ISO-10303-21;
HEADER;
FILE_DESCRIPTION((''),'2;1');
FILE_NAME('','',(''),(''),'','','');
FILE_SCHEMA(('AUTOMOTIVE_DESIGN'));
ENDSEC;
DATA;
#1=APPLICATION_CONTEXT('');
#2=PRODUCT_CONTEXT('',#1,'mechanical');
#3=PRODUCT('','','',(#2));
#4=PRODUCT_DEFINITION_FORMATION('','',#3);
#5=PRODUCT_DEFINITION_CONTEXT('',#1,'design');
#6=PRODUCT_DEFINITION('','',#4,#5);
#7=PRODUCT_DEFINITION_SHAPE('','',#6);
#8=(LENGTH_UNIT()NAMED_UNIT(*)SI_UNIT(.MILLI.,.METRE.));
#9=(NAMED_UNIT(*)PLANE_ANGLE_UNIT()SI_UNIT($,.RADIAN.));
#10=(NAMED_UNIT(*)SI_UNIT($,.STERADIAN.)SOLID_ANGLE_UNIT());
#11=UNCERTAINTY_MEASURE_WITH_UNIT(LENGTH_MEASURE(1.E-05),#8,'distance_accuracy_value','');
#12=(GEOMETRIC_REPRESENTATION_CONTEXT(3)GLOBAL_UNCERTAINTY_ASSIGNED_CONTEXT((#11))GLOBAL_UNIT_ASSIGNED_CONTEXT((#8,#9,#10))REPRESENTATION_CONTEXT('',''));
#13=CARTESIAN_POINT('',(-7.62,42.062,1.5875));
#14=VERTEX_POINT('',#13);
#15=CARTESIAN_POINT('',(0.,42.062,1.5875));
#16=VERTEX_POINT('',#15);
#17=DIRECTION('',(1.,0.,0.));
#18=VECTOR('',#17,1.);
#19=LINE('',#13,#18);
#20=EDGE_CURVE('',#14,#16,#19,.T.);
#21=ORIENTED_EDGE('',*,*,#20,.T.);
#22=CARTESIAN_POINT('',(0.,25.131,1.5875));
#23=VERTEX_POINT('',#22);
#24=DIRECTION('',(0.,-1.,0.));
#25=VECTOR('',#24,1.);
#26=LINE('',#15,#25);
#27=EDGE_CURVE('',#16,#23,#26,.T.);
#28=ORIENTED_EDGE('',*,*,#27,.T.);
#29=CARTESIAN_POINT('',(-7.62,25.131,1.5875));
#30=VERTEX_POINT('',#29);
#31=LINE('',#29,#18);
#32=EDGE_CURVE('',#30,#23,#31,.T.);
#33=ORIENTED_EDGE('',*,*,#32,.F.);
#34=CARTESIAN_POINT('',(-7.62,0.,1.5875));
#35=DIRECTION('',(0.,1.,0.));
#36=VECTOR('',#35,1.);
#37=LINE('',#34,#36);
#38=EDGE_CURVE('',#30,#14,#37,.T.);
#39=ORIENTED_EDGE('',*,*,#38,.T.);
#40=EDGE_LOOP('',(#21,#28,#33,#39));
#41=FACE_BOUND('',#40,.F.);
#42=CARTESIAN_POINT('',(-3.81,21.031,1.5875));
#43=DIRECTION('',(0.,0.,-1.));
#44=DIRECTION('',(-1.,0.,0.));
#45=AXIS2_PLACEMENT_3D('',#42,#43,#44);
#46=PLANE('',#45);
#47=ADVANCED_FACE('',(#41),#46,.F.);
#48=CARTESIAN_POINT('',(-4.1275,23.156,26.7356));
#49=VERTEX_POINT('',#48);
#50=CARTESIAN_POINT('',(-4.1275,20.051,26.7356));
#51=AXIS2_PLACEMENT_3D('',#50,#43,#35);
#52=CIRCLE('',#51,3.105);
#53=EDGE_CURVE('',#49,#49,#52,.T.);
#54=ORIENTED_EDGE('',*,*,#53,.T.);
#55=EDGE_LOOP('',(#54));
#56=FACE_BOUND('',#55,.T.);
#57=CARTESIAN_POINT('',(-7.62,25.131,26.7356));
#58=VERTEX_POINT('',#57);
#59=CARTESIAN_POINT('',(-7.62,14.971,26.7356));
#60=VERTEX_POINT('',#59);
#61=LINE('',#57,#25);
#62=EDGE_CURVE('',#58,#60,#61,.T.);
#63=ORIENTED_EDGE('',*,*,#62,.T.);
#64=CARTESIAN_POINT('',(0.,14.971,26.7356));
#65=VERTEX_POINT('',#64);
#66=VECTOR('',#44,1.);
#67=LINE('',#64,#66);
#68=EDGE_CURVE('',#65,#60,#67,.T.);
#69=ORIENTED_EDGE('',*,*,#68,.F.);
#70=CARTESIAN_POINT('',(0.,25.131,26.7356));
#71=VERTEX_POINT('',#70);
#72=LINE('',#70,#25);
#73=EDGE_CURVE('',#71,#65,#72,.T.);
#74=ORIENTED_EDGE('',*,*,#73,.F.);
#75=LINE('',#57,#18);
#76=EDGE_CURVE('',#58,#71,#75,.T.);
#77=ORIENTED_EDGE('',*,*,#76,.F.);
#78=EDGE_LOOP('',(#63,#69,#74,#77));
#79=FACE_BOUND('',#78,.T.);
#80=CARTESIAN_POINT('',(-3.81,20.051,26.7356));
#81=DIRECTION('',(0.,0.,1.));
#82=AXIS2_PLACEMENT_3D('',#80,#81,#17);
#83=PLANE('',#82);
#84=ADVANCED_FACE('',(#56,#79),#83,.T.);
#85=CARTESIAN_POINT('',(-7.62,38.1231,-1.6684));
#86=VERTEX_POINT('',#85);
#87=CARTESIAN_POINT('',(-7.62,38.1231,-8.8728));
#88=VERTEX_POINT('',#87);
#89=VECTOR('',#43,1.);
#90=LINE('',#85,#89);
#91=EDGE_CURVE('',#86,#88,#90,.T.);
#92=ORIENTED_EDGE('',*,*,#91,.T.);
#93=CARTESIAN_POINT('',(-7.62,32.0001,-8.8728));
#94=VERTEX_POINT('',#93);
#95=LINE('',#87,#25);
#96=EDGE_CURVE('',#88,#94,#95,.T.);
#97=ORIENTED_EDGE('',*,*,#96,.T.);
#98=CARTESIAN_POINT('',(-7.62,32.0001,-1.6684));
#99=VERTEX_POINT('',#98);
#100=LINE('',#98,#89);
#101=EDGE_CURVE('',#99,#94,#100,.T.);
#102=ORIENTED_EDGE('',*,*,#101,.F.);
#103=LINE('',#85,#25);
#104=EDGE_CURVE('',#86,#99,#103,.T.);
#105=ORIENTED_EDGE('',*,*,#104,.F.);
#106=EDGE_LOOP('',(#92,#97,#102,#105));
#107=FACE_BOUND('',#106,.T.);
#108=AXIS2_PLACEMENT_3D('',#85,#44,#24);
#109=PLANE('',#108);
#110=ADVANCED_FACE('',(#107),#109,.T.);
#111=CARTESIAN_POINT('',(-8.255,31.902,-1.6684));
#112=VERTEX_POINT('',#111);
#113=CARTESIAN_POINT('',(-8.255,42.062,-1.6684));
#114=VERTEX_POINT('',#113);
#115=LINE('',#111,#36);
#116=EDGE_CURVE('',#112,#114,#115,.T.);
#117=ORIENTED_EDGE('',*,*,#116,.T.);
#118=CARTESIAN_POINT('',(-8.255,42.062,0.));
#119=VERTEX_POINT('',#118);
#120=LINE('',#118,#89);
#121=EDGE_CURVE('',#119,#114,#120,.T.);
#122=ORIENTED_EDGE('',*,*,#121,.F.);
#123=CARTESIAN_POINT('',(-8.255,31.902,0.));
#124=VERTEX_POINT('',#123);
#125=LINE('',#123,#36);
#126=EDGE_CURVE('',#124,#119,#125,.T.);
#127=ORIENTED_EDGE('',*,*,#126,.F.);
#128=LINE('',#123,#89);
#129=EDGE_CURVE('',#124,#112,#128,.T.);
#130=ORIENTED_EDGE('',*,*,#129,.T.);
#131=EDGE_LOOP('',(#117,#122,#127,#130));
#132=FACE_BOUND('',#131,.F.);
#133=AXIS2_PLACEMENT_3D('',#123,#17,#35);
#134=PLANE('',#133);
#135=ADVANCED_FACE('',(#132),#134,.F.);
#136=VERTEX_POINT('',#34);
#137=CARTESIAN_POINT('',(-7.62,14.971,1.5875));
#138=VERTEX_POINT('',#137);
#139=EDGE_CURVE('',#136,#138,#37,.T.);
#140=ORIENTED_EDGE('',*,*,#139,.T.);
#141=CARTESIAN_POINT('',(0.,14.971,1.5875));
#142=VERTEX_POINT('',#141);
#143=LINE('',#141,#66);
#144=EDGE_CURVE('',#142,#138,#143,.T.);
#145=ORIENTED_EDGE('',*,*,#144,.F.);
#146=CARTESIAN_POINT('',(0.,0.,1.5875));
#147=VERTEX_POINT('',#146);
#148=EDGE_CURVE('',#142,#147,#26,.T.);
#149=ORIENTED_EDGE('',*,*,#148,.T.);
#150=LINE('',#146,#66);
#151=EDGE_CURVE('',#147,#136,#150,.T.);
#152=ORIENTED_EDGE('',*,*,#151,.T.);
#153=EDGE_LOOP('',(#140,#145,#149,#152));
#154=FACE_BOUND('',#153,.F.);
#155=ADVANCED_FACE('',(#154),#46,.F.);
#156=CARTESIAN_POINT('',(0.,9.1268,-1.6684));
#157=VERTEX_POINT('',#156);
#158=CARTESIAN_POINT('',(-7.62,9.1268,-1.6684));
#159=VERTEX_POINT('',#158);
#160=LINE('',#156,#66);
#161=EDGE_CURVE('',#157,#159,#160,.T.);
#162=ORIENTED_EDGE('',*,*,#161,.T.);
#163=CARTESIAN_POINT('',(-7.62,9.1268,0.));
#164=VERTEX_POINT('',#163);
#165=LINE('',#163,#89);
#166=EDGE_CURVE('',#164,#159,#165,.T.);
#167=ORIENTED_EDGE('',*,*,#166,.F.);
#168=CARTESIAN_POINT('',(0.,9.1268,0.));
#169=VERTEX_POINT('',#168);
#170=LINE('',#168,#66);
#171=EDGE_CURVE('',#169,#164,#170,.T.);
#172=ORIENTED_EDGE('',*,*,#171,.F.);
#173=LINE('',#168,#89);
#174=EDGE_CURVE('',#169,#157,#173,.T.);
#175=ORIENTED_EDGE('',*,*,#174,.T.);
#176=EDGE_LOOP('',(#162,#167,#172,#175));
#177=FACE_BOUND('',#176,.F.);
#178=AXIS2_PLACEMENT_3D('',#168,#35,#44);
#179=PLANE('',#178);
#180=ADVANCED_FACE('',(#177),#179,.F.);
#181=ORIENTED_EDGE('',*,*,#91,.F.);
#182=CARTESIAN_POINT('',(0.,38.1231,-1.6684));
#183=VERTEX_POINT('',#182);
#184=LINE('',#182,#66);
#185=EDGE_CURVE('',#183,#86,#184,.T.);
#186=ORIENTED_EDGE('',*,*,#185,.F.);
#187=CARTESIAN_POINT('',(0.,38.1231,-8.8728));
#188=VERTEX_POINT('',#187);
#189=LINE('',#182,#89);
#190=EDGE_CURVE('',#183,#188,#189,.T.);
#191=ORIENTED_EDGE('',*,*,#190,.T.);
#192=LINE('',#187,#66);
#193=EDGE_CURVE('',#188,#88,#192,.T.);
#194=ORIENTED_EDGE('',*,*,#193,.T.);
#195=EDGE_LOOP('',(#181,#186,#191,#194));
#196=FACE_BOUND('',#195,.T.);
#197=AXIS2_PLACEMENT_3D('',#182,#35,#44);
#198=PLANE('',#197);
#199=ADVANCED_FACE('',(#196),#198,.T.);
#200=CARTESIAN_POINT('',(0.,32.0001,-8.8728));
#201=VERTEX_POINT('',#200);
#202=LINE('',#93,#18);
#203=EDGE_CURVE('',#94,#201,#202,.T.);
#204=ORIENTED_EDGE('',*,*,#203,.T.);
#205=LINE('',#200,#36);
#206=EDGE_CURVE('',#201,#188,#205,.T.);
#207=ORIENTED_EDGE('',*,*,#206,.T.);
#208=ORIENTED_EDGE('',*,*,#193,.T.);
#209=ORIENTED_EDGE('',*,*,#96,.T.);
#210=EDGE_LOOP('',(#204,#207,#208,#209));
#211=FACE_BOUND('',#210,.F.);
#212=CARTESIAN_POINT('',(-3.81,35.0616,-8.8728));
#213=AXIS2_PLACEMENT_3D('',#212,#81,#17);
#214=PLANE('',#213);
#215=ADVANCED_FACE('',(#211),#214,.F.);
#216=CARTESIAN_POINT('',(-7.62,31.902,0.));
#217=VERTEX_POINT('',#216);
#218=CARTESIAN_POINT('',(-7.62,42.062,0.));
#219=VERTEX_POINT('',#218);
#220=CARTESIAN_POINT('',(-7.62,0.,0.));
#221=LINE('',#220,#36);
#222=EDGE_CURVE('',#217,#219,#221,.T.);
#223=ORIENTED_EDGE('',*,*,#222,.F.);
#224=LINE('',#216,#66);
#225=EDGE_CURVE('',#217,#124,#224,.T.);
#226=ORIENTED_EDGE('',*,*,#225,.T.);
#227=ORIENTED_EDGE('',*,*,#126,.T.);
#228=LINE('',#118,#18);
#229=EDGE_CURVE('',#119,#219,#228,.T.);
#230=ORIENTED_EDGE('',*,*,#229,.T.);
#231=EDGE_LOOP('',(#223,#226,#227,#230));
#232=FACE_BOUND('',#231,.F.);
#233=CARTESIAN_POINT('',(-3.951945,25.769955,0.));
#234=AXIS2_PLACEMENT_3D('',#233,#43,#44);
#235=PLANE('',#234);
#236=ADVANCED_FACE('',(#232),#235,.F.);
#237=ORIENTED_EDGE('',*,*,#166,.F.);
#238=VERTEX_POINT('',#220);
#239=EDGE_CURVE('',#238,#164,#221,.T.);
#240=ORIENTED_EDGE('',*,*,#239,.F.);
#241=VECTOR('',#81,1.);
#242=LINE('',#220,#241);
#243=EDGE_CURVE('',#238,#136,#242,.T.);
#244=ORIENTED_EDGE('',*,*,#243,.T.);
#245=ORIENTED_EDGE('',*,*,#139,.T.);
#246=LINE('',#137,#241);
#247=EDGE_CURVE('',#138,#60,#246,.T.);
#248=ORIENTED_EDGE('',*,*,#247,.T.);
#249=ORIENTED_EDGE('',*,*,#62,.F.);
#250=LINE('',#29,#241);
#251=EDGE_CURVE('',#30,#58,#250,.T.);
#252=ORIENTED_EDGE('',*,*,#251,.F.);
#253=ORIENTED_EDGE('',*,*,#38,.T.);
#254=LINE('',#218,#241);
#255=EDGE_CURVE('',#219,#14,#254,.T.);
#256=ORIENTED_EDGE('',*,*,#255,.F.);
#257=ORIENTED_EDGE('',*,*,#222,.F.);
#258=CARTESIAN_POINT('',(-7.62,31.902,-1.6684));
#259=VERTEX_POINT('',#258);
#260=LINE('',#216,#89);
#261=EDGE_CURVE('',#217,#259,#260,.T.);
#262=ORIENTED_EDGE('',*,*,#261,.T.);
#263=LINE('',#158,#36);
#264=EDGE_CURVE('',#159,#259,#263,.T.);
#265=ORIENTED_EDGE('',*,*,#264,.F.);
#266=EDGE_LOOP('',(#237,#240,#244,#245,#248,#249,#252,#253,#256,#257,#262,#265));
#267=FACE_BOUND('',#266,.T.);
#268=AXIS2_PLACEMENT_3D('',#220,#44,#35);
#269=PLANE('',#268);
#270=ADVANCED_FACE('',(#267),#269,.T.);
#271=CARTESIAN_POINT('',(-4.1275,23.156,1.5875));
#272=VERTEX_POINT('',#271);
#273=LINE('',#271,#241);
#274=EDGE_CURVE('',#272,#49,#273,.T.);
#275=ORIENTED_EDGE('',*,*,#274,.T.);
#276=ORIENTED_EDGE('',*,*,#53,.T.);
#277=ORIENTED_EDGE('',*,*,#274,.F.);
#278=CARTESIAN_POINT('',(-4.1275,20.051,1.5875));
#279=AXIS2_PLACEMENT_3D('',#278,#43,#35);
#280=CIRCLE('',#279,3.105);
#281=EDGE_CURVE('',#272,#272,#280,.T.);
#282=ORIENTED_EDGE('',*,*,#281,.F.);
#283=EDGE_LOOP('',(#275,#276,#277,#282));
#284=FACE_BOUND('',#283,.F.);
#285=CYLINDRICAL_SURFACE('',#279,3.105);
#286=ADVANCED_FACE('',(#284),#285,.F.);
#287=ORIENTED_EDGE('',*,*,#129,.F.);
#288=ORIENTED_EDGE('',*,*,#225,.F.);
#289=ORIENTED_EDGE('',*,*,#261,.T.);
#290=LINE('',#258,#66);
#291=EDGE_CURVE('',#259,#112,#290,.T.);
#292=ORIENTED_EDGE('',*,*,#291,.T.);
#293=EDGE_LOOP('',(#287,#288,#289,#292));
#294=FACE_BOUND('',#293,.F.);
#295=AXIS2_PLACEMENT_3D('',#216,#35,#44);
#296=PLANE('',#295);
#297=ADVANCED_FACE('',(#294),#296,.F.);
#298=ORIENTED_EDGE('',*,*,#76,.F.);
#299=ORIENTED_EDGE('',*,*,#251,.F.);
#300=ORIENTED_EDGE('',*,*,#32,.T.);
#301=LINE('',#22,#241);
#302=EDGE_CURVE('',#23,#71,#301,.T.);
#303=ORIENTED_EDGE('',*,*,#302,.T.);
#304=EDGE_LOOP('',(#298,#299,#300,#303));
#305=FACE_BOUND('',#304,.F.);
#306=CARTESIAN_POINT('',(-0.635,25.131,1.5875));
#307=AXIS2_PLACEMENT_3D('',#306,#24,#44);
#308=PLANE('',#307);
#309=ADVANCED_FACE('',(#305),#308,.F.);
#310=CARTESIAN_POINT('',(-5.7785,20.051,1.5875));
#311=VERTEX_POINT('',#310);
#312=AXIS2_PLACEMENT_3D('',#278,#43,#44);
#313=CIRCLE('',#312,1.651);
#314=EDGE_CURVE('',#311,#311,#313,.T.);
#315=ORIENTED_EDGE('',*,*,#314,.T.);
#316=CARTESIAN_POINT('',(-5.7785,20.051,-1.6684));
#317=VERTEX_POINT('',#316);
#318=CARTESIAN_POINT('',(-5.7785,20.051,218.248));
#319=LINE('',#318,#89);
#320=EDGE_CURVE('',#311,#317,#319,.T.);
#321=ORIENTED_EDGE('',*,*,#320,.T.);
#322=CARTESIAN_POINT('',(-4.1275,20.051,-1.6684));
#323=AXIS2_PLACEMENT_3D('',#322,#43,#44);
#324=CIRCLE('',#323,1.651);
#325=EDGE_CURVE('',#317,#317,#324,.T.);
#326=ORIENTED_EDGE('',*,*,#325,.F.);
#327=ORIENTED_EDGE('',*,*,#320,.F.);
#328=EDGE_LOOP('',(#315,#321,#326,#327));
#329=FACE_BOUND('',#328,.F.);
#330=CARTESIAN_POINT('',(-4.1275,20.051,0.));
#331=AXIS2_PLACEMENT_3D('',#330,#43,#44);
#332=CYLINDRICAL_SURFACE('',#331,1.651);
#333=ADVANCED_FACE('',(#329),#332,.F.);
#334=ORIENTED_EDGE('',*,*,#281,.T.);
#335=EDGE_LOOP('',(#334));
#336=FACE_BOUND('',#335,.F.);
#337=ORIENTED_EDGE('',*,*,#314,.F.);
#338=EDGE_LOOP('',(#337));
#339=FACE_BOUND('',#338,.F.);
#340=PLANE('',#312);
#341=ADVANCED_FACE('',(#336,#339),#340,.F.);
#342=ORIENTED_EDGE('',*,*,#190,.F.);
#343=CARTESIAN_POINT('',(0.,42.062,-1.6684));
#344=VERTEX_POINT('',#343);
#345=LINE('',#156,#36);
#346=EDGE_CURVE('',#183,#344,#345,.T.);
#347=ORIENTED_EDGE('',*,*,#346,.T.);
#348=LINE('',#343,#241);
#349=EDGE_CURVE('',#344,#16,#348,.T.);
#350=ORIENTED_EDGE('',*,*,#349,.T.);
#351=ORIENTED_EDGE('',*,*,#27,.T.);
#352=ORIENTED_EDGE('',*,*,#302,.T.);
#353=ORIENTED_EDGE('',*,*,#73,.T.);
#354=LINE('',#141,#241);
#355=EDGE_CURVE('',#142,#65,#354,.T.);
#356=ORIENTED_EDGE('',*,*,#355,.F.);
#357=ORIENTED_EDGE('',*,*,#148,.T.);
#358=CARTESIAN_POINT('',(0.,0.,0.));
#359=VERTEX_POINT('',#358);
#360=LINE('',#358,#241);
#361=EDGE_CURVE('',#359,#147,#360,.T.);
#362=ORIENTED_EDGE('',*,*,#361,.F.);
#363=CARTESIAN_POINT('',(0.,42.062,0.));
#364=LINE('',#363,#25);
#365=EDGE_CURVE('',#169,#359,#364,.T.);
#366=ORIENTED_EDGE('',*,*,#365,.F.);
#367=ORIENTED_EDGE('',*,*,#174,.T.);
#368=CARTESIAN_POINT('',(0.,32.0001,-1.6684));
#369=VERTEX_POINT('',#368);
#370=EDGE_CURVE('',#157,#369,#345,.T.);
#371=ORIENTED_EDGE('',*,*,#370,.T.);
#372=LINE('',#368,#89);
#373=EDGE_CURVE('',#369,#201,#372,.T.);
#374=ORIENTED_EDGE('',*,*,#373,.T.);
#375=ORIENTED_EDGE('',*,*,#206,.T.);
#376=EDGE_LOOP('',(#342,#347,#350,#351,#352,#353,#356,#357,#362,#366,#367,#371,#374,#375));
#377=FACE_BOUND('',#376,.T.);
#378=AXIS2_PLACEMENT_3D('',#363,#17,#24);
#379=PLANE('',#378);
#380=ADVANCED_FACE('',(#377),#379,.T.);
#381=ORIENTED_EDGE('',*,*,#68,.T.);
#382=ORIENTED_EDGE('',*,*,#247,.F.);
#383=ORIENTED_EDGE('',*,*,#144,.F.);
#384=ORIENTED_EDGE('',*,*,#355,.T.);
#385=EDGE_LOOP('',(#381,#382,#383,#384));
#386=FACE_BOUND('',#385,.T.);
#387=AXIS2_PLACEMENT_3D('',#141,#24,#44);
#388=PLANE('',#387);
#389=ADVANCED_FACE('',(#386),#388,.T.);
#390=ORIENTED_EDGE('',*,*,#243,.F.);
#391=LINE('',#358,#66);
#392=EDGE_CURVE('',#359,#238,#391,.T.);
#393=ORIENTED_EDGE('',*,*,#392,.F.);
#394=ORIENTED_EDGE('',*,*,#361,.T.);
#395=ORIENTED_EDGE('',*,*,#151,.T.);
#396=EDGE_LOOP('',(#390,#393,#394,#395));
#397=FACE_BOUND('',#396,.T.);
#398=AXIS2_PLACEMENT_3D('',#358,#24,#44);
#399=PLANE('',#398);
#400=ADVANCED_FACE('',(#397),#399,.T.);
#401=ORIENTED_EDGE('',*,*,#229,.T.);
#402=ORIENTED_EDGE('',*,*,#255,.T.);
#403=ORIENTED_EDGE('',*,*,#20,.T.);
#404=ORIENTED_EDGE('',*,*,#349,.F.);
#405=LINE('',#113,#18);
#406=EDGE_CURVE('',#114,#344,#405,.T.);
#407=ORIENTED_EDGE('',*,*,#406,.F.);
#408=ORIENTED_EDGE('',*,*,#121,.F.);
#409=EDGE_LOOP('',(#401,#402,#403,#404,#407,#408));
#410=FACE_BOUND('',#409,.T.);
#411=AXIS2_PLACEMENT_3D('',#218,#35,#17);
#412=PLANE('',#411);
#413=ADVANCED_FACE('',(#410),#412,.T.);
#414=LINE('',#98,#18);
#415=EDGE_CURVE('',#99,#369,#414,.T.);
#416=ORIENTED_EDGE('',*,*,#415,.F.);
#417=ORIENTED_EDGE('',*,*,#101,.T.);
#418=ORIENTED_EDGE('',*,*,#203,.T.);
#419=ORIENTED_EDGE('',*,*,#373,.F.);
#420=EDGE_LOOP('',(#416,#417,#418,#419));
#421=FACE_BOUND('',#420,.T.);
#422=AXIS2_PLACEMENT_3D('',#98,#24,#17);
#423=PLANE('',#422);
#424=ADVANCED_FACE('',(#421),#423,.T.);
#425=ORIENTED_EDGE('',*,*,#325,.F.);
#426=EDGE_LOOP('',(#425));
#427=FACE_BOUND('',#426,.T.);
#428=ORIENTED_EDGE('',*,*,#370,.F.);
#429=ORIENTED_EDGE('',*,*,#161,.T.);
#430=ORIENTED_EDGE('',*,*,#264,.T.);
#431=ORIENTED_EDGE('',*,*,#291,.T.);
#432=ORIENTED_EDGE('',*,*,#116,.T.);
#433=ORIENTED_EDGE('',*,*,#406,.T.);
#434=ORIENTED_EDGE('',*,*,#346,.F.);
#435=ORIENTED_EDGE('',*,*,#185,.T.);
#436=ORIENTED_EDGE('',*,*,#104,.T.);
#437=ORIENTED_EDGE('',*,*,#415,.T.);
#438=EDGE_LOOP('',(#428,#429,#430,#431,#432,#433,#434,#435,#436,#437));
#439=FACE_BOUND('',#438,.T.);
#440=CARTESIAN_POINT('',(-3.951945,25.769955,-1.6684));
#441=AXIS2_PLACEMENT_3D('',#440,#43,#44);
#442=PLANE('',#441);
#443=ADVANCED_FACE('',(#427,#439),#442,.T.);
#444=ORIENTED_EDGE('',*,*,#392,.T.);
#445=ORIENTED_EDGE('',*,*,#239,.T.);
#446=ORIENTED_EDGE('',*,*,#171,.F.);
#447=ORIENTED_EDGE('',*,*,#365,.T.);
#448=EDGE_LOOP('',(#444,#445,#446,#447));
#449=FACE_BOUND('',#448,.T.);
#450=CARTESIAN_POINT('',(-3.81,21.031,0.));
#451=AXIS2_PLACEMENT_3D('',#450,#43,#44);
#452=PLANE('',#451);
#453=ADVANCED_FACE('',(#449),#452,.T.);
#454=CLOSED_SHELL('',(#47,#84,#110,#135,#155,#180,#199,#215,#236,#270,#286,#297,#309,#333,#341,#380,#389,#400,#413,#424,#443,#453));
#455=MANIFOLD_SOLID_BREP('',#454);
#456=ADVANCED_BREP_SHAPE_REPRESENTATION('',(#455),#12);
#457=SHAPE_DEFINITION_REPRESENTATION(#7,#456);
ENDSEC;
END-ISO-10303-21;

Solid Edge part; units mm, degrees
sketch "Sketch1" plane through (0, 0, 0) normal (0, 0, 1) x (1, 0, 0)
  line L0 (0, 0) -> (-7.62, 0)
  line L1 (-7.62, 0) -> (-7.62, 42.062)
  line L2 (-7.62, 42.062) -> (0, 42.062)
  line L3 (0, 42.062) -> (0, 0)
  dimension "D1" = 7.62
  dimension "D2" = 3.175
  dimension "D3" = 10.16
extrude "Protrusion1" add sketch "Sketch1" along normal blind 1.5875
sketch "Sketch2" plane through (-4.1275, 17.6405, 0) normal (0, 0, -1) x (0, 1, 0)
  line L0 (-8.5137, -3.4925) -> (14.2615, -3.4925)
  line L1 (-8.5137, 4.1275) -> (-8.5137, -3.4925)
  line L2 (14.2615, 4.1275) -> (-8.5137, 4.1275)
  line L3 (24.4215, 4.1275) -> (14.2615, 4.1275)
  line L4 (24.4215, -4.1275) -> (24.4215, 4.1275)
  line L5 (14.2615, -4.1275) -> (24.4215, -4.1275)
extrude "Protrusion2" add sketch "Sketch2" along normal up to vertex (1.6684 mm away) material side at (-7.67, 20.5144, 0)
sketch "Sketch3" plane through (-4.1275, 15.951, 0) normal (0, 0, -1) x (-1, 0, 0)
  circle A0 centre (0, 4.1) radius 1.651
  dimension "D1" = 3.302
extrude "Cutout1" cut sketch "Sketch3" against normal through all and the other way through all
sketch "Sketch4" plane through (-4.1275, 24.3244, -1.6684) normal (0, 0, -1) x (0, 1, 0)
  line L0 (7.6757, 4.1275) -> (13.7987, 4.1275)
  line L1 (13.7987, 4.1275) -> (13.7987, -3.4925)
  line L2 (13.7987, -3.4925) -> (7.6757, -3.4925)
  line L3 (7.6757, -3.4925) -> (7.6757, 4.1275)
extrude "ExtrudedProtrusion_3" add sketch "Sketch4" along normal blind 7.2044
sketch "Sketch5" plane through (-3.81, 21.031, 1.5875) normal (0, 0, 1) x (0, -1, 0)
  line L0 (-4.1, 3.175) -> (-4.1, -3.81)
  line L1 (-4.1, -3.81) -> (6.06, -3.81)
  line L2 (6.06, -3.81) -> (6.06, 3.175)
  line L3 (6.06, 3.81) -> (6.06, 3.175)
  line L4 (-4.1, 3.81) -> (6.06, 3.81)
  line L5 (-4.1, 3.175) -> (-4.1, 3.81)
extrude "ExtrudedProtrusion_4" add sketch "Sketch5" along normal blind 25.1481
sketch "Sketch6" plane through (-4.1275, 20.051, 1.5875) normal (0, 0, -1) x (0, 1, 0)
  circle A0 centre (0, 0) radius 3.105
extrude "Cutout2" cut sketch "Sketch6" against normal through all
